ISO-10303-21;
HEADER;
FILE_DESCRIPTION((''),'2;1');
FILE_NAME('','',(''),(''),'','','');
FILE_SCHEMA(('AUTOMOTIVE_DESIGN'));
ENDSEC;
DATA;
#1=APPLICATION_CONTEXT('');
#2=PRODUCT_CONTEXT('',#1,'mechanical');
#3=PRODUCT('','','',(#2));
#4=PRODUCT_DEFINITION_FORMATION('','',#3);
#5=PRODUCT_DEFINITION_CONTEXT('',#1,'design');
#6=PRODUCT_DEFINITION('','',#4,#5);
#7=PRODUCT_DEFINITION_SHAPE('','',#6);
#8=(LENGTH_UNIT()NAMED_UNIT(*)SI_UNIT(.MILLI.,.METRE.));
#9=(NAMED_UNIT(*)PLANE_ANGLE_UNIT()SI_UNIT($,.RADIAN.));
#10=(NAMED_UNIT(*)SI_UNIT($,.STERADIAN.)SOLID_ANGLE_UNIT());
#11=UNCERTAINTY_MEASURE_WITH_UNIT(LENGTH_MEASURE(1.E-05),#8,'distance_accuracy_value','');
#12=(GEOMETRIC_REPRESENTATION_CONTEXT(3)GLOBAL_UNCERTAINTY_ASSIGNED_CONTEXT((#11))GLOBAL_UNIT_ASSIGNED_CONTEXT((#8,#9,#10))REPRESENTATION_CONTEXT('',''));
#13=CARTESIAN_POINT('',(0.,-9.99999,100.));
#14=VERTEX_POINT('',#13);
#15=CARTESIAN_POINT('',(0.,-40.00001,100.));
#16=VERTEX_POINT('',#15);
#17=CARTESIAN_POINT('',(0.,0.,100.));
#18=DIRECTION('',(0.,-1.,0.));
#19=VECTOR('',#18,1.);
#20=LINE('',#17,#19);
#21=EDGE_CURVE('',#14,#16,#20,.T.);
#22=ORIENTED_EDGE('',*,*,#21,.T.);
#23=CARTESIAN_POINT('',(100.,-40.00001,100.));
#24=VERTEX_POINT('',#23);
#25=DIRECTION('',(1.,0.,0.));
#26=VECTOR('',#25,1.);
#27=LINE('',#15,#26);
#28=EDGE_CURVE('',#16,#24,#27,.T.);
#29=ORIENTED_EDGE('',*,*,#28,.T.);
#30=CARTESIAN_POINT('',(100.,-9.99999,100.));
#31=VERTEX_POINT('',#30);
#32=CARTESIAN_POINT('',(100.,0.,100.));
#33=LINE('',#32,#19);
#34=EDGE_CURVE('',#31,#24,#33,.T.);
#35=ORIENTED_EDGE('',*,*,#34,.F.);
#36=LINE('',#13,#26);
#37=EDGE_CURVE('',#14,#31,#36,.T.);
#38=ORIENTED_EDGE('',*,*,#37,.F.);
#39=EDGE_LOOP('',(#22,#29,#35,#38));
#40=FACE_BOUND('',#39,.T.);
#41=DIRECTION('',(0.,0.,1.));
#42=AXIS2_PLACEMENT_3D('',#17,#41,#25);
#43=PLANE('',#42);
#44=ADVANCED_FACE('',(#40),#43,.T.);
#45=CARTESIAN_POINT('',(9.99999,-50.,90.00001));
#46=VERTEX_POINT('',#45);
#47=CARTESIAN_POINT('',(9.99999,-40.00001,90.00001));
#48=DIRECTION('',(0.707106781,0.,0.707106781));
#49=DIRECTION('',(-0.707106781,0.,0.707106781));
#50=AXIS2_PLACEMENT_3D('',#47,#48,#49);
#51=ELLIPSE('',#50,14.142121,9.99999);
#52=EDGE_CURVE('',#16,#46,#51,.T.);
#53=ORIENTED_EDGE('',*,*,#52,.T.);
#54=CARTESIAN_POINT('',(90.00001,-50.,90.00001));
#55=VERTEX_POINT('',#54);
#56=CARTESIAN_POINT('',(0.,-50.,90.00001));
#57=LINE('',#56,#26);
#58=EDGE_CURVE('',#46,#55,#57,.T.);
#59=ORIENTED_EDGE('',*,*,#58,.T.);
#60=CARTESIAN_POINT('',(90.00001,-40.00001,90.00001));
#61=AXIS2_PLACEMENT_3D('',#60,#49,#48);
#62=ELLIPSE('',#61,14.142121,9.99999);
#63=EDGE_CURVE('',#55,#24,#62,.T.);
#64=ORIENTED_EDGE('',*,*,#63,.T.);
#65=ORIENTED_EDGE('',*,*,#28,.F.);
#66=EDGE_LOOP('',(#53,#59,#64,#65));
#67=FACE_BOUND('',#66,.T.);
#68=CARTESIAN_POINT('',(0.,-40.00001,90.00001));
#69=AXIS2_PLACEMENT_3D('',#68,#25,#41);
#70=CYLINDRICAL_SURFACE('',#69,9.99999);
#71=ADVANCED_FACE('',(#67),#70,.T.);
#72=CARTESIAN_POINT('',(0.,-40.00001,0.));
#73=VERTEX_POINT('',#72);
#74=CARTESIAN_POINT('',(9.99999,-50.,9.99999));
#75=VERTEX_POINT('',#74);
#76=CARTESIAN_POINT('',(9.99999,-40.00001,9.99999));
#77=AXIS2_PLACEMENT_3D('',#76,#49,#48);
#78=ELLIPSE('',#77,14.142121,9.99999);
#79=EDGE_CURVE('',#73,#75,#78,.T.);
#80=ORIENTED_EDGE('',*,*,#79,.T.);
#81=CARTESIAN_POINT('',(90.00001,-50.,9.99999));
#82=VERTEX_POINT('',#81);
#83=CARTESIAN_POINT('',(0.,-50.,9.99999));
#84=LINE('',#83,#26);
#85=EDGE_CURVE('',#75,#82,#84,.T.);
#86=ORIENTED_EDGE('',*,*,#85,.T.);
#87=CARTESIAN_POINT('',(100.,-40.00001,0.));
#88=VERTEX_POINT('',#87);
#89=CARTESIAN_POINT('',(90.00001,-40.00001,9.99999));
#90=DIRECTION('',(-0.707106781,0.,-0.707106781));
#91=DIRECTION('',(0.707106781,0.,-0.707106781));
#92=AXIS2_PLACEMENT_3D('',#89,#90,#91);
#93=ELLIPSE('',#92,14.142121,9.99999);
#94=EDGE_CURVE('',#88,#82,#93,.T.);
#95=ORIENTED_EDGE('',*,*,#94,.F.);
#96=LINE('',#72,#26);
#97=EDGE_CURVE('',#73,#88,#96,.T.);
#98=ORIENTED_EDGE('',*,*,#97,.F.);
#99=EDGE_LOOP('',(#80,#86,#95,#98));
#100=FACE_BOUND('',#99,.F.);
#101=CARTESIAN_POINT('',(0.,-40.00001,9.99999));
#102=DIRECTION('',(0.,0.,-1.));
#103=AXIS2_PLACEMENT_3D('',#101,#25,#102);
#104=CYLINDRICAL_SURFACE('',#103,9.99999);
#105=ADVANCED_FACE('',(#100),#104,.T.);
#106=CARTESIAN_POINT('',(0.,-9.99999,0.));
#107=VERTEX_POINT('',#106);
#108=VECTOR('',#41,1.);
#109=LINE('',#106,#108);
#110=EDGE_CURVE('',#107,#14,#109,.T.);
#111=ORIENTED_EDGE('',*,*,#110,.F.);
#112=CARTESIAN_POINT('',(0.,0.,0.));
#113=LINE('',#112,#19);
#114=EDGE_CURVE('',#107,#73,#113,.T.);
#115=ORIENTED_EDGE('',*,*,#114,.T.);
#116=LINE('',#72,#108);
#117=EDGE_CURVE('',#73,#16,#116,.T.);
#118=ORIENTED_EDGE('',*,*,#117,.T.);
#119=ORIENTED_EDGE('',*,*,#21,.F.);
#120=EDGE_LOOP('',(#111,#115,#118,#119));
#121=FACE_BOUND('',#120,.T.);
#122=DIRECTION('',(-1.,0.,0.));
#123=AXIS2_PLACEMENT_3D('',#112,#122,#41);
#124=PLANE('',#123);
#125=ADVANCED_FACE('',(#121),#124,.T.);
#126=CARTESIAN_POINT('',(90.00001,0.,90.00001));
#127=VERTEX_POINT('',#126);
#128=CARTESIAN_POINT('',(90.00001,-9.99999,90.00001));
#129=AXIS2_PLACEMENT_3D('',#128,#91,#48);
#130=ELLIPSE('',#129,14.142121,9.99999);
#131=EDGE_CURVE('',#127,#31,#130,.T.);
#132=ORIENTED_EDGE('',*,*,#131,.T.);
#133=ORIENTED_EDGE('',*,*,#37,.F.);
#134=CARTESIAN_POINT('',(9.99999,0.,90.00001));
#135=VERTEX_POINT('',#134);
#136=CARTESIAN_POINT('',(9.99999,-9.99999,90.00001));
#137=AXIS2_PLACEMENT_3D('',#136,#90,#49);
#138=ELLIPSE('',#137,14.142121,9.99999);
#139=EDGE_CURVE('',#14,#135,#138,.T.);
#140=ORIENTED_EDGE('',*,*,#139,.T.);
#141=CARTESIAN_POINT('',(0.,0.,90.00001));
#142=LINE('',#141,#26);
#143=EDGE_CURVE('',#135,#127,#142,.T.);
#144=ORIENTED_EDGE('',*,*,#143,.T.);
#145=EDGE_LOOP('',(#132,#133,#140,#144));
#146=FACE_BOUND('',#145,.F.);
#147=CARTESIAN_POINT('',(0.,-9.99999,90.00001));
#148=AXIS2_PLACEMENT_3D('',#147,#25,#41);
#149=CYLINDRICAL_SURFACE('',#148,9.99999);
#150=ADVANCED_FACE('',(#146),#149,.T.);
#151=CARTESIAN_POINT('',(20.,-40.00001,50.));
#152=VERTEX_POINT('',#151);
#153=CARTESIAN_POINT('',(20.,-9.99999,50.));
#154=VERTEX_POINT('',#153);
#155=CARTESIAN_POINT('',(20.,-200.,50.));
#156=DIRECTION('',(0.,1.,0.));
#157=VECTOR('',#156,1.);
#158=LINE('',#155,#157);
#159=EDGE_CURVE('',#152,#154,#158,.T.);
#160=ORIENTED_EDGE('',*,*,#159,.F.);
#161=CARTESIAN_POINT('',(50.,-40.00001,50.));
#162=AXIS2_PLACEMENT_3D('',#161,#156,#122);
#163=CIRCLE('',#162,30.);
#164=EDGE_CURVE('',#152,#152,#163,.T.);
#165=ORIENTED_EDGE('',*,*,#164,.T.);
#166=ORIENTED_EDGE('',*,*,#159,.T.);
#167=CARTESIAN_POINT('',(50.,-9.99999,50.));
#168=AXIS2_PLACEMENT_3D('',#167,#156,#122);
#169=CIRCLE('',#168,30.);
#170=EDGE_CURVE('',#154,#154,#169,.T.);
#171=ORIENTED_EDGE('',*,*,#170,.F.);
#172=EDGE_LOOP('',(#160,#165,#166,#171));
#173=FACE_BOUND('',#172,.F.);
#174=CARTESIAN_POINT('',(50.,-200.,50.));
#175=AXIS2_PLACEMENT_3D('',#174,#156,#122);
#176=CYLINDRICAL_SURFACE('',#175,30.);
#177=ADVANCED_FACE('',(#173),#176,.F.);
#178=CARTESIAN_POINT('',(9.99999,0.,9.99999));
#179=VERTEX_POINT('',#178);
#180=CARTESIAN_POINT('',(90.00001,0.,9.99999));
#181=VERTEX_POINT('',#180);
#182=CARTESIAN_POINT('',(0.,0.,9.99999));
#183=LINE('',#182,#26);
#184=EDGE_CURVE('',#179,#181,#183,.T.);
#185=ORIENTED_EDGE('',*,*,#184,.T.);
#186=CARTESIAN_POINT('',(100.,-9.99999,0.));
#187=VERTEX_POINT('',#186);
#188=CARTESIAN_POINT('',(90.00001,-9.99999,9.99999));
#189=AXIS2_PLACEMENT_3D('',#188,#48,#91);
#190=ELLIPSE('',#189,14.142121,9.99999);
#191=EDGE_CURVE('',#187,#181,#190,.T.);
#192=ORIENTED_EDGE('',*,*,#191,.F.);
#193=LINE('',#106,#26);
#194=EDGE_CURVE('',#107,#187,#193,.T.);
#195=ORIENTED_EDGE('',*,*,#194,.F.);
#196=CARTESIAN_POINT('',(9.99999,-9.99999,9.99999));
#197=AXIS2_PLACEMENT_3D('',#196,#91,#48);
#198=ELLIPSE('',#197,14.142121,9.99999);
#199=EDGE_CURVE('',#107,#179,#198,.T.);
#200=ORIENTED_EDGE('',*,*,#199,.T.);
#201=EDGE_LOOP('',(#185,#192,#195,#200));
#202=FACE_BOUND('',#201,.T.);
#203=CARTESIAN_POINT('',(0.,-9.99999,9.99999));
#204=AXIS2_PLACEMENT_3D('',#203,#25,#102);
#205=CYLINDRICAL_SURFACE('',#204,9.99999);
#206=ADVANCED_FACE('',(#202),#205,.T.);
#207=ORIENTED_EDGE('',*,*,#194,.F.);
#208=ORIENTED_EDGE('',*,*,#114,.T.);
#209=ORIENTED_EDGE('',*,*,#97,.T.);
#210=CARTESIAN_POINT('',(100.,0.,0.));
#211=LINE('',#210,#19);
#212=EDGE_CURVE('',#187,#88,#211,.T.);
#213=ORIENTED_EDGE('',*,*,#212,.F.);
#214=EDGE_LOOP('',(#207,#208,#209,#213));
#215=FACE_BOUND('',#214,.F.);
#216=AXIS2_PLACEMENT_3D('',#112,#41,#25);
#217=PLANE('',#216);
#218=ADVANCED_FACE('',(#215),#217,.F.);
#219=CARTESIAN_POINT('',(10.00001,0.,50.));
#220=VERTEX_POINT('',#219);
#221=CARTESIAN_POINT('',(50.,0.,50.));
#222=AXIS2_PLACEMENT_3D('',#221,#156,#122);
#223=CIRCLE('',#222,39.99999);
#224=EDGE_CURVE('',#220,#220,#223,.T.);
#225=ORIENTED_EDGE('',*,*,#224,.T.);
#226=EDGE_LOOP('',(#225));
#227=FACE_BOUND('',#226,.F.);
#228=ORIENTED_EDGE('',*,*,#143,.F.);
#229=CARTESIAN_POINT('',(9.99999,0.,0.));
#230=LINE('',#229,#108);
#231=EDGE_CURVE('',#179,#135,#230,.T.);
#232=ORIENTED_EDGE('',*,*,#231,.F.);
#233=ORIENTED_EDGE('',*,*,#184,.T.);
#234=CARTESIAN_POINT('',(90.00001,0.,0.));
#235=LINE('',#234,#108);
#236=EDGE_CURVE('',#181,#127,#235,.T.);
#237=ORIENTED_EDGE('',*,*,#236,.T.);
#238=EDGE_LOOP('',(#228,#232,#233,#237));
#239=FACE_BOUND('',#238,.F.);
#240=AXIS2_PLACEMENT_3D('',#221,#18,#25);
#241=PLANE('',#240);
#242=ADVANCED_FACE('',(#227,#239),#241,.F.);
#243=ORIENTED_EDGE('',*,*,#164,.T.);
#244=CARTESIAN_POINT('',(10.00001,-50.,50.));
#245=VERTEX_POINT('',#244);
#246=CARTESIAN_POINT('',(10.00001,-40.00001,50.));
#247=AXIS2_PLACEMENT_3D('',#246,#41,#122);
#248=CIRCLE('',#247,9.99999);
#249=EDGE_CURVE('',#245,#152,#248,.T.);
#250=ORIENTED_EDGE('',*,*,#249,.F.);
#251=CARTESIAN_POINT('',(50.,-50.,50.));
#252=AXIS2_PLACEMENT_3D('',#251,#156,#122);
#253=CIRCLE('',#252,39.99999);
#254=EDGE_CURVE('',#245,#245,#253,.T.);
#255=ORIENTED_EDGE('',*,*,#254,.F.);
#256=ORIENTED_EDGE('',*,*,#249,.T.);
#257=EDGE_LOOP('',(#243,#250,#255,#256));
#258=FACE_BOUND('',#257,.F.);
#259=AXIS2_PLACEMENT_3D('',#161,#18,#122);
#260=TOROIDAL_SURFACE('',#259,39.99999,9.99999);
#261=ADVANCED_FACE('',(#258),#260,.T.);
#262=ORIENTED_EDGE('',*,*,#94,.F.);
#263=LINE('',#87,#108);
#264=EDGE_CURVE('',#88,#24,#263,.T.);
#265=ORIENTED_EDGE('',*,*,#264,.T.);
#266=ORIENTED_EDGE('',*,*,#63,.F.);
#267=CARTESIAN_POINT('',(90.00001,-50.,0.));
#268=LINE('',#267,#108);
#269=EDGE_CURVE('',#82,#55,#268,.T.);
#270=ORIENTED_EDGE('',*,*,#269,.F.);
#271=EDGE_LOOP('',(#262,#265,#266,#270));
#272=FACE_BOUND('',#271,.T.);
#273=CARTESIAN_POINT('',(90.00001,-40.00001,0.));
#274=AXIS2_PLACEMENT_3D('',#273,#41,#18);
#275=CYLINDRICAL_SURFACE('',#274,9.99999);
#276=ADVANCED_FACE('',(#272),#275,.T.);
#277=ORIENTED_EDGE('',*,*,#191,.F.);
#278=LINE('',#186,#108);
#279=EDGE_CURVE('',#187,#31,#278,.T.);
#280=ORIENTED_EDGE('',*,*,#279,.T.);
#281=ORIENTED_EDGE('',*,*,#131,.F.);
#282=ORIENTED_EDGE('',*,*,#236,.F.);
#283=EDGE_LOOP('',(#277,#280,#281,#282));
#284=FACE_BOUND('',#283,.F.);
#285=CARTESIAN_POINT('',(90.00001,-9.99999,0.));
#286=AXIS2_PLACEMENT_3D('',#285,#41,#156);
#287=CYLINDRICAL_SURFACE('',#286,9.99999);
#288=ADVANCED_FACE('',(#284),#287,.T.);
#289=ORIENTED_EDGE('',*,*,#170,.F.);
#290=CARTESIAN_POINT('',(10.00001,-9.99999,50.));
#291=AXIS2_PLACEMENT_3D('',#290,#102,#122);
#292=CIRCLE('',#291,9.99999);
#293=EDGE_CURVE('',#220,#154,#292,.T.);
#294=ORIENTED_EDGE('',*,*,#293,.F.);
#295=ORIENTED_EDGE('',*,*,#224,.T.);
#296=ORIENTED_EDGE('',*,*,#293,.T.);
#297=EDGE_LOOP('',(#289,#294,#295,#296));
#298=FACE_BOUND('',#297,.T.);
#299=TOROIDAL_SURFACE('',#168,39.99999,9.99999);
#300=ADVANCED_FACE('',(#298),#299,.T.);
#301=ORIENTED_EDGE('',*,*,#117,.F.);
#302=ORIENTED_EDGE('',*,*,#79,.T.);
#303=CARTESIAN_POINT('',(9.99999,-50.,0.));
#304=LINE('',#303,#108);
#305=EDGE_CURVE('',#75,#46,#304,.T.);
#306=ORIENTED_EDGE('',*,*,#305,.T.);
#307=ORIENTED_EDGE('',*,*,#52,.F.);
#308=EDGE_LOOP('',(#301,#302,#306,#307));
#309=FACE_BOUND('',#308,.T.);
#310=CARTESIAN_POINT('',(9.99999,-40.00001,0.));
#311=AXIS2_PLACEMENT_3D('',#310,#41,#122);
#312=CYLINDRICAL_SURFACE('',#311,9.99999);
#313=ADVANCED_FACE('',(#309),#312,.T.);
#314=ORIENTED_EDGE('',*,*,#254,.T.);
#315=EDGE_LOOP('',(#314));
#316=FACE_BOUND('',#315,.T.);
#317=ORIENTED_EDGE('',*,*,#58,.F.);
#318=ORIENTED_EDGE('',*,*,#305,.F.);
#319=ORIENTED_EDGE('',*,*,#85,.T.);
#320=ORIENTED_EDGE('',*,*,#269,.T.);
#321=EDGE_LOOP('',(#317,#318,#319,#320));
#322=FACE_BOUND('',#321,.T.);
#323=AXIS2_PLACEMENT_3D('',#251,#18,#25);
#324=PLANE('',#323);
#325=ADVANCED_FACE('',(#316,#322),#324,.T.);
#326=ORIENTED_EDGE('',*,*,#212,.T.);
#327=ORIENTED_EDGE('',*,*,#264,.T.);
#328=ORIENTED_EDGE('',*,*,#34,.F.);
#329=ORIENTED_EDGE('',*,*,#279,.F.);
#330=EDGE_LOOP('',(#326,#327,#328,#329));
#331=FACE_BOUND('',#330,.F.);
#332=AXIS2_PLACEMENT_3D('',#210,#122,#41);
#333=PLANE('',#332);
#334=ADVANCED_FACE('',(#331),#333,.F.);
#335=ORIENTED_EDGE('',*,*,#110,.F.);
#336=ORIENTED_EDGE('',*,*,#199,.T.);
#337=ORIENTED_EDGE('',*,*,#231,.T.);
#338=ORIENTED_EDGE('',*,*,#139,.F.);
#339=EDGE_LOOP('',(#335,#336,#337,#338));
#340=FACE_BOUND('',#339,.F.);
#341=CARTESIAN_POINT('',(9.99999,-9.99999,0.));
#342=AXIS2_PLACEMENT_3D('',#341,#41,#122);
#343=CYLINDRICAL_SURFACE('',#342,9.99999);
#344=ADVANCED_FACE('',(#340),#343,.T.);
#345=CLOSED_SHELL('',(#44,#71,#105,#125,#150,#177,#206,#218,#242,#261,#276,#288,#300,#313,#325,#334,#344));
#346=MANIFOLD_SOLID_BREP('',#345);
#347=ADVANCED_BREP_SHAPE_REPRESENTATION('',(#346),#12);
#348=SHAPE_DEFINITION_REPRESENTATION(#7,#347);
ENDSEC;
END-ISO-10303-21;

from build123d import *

# Parameters (mm, degrees)
F0_W     = 100
F0_H     = 100
F1_DEPTH = 50
F3_D     = 60
F4_R     = 9.99999


# Not quite as in the source:
# - a fillet or chamfer is up to 0.001 mm smaller than in the source, because OpenCascade refuses the exact size


with BuildPart() as f1:
    # F0 (on Front) → F1 (new body)
    with BuildSketch(Plane.XZ):
        with Locations((50, 50)):
            Rectangle(F0_W, F0_H)
    extrude(amount=F1_DEPTH)

    # F3 (through all)
    with Locations(Plane.XZ.offset(50)):
        with Locations((50, 50)):
            Hole(F3_D / 2)

    # F4 (radius 10 in the source; OpenCascade refuses exactly that, so slightly less here)
    f4_edges = [f1.edges().sort_by_distance(p)[0] for p in [
        (50, -50, 0),
        (0, -50, 50),
        (100, -50, 50),
        (50, -50, 100),
        (20, -50, 50),
        (50, 0, 0),
        (0, 0, 50),
        (100, 0, 50),
        (50, 0, 100),
        (20, 0, 50),
    ]]
    fillet(f4_edges, radius=F4_R)


solid = f1.part
